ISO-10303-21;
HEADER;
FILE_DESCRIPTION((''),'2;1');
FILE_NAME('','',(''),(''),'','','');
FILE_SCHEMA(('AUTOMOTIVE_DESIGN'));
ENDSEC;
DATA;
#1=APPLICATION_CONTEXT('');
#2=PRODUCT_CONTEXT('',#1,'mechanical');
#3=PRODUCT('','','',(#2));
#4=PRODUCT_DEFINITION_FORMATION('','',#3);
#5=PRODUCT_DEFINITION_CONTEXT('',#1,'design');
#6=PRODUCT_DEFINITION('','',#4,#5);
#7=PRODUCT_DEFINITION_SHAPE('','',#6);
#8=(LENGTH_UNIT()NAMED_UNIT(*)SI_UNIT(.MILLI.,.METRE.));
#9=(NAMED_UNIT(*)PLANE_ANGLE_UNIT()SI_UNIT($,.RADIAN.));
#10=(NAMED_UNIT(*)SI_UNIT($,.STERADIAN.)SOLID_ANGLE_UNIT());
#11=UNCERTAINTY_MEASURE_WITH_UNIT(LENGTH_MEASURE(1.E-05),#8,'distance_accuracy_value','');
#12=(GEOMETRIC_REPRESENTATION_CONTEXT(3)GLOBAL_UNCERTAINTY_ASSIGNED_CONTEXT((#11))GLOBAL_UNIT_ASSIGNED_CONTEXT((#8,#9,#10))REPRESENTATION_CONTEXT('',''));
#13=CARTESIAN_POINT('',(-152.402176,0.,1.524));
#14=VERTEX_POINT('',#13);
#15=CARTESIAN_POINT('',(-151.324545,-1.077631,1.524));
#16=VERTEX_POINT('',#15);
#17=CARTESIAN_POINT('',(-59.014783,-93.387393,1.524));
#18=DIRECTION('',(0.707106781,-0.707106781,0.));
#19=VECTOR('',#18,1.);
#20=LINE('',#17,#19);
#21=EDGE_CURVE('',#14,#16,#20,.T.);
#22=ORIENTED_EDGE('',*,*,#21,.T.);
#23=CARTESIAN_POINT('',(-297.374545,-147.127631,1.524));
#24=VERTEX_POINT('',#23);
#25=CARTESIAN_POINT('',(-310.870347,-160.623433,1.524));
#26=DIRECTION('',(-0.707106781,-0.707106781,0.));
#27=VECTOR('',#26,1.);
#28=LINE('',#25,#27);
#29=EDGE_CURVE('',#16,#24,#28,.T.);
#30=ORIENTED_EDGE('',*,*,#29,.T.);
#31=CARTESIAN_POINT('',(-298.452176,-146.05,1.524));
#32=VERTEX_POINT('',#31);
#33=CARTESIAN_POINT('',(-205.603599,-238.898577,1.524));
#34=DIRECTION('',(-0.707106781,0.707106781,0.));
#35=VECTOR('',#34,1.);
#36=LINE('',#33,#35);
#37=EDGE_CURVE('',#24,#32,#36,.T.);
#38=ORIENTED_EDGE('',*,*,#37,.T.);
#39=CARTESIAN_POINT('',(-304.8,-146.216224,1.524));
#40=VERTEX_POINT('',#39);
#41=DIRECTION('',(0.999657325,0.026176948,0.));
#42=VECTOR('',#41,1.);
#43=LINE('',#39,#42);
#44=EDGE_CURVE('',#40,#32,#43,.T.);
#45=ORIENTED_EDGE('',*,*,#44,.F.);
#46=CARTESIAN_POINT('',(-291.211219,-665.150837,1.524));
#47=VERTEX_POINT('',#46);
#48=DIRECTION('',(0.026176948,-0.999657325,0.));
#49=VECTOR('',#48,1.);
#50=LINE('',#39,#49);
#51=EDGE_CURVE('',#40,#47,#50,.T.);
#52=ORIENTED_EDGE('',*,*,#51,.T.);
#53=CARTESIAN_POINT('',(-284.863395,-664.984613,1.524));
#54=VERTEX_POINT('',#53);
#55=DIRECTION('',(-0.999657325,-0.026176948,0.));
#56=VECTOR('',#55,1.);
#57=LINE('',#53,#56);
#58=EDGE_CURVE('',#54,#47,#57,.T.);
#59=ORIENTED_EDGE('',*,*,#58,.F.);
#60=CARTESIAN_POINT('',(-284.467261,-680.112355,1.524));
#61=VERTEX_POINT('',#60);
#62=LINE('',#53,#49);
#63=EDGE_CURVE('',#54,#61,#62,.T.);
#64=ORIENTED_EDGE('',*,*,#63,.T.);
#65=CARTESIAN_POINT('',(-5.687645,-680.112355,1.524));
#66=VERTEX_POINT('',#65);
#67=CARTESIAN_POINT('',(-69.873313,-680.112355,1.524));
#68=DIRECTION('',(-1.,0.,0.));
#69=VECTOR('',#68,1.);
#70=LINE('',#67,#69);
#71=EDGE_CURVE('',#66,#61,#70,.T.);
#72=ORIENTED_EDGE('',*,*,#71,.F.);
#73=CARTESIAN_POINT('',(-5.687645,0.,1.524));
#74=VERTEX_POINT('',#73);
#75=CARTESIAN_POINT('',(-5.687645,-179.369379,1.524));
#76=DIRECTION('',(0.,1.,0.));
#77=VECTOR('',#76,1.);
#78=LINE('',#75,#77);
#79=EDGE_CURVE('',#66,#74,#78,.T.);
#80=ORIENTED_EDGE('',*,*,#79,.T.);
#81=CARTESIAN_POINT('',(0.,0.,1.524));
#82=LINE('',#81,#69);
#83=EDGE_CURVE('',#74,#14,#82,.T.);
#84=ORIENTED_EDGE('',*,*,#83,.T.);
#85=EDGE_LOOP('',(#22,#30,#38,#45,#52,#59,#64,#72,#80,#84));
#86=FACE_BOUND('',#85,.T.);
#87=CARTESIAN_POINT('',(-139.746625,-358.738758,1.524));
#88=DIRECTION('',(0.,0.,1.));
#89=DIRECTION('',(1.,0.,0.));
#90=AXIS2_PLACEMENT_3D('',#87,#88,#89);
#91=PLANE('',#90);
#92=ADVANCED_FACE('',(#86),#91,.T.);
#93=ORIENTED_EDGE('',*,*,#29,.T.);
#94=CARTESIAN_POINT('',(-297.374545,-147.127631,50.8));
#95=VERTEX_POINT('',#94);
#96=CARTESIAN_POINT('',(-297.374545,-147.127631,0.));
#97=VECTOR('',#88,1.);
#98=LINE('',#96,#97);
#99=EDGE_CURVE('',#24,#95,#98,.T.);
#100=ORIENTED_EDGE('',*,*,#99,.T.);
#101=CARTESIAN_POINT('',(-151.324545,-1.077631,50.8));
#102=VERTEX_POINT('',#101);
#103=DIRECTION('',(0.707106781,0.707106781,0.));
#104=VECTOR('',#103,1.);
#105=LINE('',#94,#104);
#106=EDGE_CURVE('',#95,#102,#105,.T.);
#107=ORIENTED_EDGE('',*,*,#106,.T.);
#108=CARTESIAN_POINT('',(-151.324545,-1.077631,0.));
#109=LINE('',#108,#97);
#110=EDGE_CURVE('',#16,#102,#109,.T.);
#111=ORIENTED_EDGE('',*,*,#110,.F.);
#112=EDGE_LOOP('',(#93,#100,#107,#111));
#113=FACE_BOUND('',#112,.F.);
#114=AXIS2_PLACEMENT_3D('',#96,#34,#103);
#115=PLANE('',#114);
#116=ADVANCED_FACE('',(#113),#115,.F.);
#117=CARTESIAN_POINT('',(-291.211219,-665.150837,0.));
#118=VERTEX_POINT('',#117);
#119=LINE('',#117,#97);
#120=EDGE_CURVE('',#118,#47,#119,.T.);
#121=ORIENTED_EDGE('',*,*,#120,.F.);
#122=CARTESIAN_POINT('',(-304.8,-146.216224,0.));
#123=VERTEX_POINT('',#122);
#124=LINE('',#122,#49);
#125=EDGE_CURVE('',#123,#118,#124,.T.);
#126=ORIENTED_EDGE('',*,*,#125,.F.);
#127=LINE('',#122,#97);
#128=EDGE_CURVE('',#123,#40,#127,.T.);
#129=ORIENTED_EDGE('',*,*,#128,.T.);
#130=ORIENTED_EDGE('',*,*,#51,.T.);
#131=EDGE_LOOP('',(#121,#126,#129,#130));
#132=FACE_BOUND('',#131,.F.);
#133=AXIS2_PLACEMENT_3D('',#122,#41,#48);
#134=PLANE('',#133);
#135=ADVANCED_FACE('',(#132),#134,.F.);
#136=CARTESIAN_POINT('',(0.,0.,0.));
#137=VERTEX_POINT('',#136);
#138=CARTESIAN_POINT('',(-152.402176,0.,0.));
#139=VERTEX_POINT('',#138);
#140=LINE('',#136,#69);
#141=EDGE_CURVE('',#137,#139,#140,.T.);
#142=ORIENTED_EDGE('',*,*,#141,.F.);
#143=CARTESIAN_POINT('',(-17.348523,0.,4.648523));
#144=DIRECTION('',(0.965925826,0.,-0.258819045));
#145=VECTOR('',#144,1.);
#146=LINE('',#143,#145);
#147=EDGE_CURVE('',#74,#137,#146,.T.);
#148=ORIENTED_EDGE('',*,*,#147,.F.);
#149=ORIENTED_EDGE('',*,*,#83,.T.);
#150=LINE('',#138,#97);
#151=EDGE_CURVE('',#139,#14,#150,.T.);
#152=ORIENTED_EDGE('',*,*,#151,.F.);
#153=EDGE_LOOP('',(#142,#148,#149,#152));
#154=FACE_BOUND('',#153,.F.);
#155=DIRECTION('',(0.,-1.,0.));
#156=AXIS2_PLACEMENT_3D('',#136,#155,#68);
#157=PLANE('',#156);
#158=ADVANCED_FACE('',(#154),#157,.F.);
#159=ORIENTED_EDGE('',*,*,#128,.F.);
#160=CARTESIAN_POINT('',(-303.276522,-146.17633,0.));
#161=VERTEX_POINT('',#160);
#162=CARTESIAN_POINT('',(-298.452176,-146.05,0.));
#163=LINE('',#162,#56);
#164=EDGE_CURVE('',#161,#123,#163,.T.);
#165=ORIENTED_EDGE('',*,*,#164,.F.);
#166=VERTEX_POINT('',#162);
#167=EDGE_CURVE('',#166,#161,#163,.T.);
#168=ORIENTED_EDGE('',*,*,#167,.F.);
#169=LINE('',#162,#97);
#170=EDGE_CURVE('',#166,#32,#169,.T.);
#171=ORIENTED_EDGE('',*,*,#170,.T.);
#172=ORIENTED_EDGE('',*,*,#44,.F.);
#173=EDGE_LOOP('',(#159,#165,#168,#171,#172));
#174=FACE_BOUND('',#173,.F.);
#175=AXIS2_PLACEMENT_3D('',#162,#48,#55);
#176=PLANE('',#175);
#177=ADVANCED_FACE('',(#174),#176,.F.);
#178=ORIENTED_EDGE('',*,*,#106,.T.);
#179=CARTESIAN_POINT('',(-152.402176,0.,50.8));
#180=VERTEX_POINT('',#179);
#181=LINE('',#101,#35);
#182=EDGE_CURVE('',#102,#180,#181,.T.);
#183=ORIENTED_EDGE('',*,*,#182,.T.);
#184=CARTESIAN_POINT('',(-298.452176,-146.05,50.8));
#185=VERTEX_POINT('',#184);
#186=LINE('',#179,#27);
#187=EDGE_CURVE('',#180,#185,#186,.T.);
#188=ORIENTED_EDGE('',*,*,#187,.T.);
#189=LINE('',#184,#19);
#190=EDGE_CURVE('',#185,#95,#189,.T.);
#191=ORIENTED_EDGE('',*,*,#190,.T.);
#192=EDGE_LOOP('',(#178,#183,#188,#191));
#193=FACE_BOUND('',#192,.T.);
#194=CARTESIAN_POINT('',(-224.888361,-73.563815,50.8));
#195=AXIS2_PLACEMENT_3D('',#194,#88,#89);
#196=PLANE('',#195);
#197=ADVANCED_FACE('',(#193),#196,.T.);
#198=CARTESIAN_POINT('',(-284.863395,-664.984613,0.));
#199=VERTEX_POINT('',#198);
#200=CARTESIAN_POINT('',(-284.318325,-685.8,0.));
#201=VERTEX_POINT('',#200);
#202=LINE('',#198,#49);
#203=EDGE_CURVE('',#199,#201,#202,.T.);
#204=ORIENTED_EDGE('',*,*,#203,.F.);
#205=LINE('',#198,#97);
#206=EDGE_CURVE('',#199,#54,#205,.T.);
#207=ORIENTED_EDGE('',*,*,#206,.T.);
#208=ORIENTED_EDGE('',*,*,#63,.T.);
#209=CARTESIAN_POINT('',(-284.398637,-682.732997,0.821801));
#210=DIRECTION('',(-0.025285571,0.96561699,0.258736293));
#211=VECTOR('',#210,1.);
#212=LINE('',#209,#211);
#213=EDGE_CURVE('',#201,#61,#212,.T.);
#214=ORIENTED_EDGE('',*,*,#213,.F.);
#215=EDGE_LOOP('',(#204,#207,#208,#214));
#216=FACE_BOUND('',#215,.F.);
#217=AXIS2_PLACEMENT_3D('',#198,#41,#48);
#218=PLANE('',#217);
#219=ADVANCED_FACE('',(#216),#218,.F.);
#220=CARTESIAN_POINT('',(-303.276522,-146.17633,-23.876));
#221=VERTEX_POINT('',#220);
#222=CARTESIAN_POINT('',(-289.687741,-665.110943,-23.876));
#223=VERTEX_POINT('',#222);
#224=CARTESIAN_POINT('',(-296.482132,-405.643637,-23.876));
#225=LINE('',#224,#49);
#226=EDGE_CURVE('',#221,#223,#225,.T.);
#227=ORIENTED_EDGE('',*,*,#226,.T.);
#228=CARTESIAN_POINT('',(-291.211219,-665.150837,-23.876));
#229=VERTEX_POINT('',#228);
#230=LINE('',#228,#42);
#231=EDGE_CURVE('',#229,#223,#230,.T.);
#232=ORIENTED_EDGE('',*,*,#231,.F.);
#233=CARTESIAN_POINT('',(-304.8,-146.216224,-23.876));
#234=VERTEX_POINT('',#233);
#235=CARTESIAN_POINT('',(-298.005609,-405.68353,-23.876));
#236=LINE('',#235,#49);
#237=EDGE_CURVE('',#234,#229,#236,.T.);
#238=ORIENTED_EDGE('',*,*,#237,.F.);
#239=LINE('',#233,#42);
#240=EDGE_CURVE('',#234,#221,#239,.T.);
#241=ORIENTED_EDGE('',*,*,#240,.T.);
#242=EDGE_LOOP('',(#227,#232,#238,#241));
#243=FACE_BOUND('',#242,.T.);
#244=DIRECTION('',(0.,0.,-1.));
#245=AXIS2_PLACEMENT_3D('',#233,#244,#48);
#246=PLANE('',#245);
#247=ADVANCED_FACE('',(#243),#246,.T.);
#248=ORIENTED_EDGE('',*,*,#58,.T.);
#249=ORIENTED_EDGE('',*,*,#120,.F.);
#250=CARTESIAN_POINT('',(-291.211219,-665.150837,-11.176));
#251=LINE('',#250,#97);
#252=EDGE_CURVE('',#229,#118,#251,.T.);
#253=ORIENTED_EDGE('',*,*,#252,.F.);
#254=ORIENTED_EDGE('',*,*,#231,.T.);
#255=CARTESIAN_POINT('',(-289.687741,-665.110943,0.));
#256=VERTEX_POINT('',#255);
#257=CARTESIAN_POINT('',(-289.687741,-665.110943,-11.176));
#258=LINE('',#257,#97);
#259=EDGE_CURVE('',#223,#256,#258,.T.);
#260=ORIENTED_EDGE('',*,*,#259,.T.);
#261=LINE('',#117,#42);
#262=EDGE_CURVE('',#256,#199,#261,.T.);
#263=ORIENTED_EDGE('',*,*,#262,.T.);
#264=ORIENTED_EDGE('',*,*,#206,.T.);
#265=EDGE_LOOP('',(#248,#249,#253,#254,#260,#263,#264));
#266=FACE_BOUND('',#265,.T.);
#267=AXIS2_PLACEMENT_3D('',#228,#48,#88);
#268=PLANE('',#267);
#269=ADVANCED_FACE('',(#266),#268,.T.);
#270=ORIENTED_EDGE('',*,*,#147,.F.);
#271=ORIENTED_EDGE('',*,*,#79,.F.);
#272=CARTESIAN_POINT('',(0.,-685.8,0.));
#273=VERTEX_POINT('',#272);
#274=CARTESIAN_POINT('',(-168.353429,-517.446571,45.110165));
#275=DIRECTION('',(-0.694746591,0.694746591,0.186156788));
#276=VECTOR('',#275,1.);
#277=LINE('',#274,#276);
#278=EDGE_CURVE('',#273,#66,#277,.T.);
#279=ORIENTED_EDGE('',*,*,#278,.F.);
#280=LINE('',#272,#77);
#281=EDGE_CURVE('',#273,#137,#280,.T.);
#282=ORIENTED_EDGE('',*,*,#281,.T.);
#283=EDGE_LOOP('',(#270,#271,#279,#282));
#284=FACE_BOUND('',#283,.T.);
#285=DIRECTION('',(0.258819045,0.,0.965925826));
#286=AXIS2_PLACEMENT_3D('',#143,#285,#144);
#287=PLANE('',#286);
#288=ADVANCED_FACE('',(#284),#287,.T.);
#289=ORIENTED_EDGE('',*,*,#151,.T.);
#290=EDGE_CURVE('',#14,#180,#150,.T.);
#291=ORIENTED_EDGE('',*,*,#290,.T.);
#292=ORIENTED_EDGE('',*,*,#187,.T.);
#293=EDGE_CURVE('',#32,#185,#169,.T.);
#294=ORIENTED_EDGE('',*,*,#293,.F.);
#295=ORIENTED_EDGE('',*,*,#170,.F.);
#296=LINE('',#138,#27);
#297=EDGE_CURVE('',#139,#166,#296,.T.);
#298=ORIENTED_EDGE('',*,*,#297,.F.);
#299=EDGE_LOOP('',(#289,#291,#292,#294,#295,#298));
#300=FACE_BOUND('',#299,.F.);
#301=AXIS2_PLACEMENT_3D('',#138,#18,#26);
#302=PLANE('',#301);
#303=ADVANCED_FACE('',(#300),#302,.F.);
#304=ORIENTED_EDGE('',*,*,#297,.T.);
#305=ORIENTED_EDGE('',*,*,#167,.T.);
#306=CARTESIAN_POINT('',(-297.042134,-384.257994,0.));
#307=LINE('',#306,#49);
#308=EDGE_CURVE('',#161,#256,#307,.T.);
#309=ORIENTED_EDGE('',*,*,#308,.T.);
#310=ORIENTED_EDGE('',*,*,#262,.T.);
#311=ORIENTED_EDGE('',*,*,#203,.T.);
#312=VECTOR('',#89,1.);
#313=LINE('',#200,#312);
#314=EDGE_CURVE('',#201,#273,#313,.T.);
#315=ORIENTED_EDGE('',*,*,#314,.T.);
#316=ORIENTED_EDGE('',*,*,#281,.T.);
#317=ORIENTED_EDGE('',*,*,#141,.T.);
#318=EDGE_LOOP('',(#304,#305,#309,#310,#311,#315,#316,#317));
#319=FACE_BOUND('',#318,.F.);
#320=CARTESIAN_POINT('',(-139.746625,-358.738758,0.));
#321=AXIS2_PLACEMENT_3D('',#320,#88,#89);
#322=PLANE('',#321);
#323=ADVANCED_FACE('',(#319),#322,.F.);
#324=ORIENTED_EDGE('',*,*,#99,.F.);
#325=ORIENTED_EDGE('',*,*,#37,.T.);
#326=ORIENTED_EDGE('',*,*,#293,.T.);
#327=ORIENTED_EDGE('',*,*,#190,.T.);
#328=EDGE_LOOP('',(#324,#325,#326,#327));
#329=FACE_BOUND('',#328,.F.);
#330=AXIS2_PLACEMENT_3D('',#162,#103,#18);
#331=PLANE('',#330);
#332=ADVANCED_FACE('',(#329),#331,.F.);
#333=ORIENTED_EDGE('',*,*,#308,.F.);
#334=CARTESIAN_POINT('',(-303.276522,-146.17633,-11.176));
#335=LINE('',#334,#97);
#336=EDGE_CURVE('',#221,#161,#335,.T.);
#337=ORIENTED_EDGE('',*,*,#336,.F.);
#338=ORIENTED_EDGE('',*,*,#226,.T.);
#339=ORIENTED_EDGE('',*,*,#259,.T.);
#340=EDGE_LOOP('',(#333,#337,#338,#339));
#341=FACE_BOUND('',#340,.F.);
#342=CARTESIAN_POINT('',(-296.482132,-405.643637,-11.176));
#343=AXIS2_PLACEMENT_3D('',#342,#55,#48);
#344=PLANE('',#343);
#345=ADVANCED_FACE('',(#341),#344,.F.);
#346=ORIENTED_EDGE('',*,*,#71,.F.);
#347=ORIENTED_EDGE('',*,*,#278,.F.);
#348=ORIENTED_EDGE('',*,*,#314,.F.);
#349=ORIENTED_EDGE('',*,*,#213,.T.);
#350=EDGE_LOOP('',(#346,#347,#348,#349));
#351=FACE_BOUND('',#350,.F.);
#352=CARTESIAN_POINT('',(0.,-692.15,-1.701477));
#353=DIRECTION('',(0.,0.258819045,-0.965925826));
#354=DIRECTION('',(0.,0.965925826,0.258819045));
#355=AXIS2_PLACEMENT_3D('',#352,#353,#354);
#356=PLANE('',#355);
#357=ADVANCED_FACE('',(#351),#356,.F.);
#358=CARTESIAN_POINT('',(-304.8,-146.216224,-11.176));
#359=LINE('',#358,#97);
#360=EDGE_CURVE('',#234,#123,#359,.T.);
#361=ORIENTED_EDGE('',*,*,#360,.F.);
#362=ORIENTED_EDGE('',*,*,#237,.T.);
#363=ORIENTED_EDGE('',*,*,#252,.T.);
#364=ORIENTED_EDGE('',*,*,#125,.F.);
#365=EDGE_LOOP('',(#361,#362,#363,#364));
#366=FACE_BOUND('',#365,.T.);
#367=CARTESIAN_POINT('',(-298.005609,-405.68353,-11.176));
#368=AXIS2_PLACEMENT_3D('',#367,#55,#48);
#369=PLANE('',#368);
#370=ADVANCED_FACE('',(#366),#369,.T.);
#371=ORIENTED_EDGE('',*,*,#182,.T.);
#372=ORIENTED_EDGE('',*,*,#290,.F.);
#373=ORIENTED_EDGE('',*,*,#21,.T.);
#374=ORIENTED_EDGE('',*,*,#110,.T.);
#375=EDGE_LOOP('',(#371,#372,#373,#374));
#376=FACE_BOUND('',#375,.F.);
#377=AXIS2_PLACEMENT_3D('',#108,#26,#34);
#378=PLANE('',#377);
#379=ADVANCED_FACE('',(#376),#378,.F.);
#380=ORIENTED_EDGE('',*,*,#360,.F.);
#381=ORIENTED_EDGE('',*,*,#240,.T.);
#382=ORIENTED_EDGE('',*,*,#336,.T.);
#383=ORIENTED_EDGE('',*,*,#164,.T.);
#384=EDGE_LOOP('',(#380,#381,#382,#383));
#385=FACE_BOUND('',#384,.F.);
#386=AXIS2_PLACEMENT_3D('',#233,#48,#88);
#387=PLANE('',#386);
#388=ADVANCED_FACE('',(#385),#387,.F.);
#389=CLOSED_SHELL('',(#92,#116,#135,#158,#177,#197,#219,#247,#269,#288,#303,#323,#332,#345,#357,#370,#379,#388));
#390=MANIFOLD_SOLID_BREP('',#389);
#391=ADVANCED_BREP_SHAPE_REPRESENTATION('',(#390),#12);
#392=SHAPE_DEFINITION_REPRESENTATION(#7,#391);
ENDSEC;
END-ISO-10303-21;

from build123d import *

# Parameters (mm, degrees)
F2_DEPTH  = 1.524
F3_W      = 519.1125
F3_H      = 25.4
F4_DEPTH  = 1.524
F6_DEPTH  = 50.8
F8_DEPTH  = 685.801
F10_DEPTH = 304.801


# Not quite as in the source:
# - a variable given as a bare number and used for a length is read in inches; the dataset says mm whatever the document's units were


with BuildPart() as f2:
    # F1 (on Top) → F2 (new body)
    with BuildSketch(Plane.XY):
        Polygon((0, 0), (-152.4021759864, 0), (-298.4521759864, -146.05), (-304.8, -146.2162236218), (-291.2112189215, -665.1508367331), (-284.8633949079, -664.9846131114), (-284.3183248194, -685.8), (0, -685.8), align=None)
    extrude(amount=F2_DEPTH)

    # F3 (on face) → F4 (join)
    with BuildSketch(Plane(origin=(-308.4173240373, -8.0761918578, 0), x_dir=(0.0261769483, -0.999657325, 0), z_dir=(-0.999657325, -0.0261769483, 0))):
        with Locations((397.7436351295, -11.176)):
            Rectangle(F3_W, F3_H)
    extrude(amount=-F4_DEPTH)

    # F5 (on Top) → F6 (join)
    with BuildSketch(Plane.XY):
        Polygon((-152.4021759864, 0), (-298.4521759864, -146.05), (-297.3745452519, -147.1276307345), (-151.3245452519, -1.0776307345), align=None)
    extrude(amount=F6_DEPTH)

    # F7 (on Front) → F8 (cut, through all)
    with BuildSketch(Plane.XZ):
        Polygon((6.35, 4.6485226281), (-17.3485226281, 4.6485226281), (6.35, -1.7014773719), align=None)
    extrude(amount=F8_DEPTH, mode=Mode.SUBTRACT)

    # F9 (on Right) → F10 (cut, through all)
    with BuildSketch(Plane.YZ):
        Polygon((-668.4514773719, 4.6485226281), (-692.15, 4.6485226281), (-692.15, -1.7014773719), align=None)
    extrude(amount=-F10_DEPTH, mode=Mode.SUBTRACT)


solid = f2.part
